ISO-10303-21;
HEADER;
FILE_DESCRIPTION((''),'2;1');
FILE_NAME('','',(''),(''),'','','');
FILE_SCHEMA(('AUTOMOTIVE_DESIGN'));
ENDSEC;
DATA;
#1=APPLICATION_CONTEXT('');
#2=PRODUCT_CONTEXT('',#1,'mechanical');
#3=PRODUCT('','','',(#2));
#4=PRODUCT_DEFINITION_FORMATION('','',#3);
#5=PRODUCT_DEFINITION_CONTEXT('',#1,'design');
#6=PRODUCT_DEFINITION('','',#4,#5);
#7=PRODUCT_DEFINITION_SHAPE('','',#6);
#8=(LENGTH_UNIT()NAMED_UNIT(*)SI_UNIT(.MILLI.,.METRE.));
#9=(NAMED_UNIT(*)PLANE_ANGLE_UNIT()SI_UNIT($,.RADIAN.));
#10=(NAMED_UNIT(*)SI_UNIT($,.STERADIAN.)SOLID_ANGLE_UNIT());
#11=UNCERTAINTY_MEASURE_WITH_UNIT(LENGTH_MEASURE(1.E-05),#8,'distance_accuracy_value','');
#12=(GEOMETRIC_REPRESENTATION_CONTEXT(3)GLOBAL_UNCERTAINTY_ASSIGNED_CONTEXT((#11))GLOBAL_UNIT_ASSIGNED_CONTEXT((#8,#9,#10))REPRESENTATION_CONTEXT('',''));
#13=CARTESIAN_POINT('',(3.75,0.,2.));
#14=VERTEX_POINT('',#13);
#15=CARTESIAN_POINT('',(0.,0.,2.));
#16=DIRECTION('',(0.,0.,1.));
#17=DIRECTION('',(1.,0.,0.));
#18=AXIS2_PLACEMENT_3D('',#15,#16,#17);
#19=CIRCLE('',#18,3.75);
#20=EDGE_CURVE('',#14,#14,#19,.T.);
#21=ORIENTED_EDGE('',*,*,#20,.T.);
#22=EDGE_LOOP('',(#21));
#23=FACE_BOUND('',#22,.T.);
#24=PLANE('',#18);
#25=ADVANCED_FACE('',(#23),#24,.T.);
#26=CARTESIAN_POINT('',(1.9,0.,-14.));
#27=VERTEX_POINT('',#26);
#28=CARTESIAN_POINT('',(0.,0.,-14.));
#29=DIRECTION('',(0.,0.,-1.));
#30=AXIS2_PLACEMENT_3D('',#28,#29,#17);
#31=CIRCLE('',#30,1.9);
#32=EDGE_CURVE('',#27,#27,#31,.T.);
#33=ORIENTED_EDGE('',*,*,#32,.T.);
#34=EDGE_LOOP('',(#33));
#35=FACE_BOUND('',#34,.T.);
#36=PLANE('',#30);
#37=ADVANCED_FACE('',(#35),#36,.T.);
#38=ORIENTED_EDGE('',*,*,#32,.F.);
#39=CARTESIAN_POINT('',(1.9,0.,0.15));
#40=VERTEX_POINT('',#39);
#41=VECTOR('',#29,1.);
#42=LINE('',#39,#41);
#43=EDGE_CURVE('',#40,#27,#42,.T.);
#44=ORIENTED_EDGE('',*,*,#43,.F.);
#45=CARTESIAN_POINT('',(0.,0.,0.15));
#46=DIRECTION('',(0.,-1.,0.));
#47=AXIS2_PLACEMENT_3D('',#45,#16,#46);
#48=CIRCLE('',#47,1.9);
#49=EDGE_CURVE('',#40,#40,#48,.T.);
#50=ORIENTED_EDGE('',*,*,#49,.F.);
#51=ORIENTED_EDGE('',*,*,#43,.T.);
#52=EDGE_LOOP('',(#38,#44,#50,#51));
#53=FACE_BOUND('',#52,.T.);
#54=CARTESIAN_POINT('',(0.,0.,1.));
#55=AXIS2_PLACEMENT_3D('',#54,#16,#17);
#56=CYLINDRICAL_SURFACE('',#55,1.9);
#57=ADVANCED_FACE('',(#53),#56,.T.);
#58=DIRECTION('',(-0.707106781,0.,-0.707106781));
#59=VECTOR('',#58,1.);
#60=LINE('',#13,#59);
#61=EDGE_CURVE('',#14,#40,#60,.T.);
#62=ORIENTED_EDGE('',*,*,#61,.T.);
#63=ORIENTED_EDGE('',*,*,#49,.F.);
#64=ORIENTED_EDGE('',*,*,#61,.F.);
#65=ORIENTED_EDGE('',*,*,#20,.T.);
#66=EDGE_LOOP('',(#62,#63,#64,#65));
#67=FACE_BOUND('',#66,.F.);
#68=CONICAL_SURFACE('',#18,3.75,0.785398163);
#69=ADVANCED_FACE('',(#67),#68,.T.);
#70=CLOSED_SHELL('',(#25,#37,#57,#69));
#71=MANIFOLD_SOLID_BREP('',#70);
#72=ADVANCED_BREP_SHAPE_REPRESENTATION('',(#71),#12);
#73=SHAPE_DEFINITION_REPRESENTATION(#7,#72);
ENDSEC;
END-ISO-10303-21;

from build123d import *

# Parameters (mm, degrees)
F0_R        = 3.75
F1_DEPTH    = 2
F2_R        = 1.9
F3_DEPTH    = 14
F4_S5_R     = 1.9
F4_T6_DEPTH = 7


# Not quite as in the source:
# - a fillet or chamfer that OpenCascade refuses, or shapes differently, is made with other operations: its cross-section is extruded or revolved along the edge and cut away or added


with BuildPart() as f1:
    # F0 (on Top) → F1 (new body)
    with BuildSketch(Plane.XY):
        Circle(F0_R)
    extrude(amount=F1_DEPTH)

    # F2 (on face) → F3 (join)
    with BuildSketch(Plane(origin=(0, 0, 0), x_dir=(1, 0, 0), z_dir=(0, 0, -1))):
        Circle(F2_R)
    extrude(amount=F3_DEPTH)

    # F4: chamfer of 2 on 1 edges, made by hand


with BuildPart() as f4_tool2:
    # F4_s3 → F4_t4 (revolve)
    with BuildSketch(Plane.XZ):
        Polygon((3.75, 2), (1.75, 0), (3.75, 0), align=None)
    revolve(axis=Axis((0, 0, 0), (0, 0, 1)))

    # F4_s5 → F4_t6 (cut, symmetric)
    with BuildSketch(Plane.XY.offset(1)):
        Circle(F4_S5_R)
    extrude(amount=F4_T6_DEPTH, both=True, mode=Mode.SUBTRACT)


with BuildPart() as f1_1:
    add(f1.part)

    # F4_t1: cut F4_tool2
    add(f4_tool2.part, mode=Mode.SUBTRACT)


solid = f1_1.part
